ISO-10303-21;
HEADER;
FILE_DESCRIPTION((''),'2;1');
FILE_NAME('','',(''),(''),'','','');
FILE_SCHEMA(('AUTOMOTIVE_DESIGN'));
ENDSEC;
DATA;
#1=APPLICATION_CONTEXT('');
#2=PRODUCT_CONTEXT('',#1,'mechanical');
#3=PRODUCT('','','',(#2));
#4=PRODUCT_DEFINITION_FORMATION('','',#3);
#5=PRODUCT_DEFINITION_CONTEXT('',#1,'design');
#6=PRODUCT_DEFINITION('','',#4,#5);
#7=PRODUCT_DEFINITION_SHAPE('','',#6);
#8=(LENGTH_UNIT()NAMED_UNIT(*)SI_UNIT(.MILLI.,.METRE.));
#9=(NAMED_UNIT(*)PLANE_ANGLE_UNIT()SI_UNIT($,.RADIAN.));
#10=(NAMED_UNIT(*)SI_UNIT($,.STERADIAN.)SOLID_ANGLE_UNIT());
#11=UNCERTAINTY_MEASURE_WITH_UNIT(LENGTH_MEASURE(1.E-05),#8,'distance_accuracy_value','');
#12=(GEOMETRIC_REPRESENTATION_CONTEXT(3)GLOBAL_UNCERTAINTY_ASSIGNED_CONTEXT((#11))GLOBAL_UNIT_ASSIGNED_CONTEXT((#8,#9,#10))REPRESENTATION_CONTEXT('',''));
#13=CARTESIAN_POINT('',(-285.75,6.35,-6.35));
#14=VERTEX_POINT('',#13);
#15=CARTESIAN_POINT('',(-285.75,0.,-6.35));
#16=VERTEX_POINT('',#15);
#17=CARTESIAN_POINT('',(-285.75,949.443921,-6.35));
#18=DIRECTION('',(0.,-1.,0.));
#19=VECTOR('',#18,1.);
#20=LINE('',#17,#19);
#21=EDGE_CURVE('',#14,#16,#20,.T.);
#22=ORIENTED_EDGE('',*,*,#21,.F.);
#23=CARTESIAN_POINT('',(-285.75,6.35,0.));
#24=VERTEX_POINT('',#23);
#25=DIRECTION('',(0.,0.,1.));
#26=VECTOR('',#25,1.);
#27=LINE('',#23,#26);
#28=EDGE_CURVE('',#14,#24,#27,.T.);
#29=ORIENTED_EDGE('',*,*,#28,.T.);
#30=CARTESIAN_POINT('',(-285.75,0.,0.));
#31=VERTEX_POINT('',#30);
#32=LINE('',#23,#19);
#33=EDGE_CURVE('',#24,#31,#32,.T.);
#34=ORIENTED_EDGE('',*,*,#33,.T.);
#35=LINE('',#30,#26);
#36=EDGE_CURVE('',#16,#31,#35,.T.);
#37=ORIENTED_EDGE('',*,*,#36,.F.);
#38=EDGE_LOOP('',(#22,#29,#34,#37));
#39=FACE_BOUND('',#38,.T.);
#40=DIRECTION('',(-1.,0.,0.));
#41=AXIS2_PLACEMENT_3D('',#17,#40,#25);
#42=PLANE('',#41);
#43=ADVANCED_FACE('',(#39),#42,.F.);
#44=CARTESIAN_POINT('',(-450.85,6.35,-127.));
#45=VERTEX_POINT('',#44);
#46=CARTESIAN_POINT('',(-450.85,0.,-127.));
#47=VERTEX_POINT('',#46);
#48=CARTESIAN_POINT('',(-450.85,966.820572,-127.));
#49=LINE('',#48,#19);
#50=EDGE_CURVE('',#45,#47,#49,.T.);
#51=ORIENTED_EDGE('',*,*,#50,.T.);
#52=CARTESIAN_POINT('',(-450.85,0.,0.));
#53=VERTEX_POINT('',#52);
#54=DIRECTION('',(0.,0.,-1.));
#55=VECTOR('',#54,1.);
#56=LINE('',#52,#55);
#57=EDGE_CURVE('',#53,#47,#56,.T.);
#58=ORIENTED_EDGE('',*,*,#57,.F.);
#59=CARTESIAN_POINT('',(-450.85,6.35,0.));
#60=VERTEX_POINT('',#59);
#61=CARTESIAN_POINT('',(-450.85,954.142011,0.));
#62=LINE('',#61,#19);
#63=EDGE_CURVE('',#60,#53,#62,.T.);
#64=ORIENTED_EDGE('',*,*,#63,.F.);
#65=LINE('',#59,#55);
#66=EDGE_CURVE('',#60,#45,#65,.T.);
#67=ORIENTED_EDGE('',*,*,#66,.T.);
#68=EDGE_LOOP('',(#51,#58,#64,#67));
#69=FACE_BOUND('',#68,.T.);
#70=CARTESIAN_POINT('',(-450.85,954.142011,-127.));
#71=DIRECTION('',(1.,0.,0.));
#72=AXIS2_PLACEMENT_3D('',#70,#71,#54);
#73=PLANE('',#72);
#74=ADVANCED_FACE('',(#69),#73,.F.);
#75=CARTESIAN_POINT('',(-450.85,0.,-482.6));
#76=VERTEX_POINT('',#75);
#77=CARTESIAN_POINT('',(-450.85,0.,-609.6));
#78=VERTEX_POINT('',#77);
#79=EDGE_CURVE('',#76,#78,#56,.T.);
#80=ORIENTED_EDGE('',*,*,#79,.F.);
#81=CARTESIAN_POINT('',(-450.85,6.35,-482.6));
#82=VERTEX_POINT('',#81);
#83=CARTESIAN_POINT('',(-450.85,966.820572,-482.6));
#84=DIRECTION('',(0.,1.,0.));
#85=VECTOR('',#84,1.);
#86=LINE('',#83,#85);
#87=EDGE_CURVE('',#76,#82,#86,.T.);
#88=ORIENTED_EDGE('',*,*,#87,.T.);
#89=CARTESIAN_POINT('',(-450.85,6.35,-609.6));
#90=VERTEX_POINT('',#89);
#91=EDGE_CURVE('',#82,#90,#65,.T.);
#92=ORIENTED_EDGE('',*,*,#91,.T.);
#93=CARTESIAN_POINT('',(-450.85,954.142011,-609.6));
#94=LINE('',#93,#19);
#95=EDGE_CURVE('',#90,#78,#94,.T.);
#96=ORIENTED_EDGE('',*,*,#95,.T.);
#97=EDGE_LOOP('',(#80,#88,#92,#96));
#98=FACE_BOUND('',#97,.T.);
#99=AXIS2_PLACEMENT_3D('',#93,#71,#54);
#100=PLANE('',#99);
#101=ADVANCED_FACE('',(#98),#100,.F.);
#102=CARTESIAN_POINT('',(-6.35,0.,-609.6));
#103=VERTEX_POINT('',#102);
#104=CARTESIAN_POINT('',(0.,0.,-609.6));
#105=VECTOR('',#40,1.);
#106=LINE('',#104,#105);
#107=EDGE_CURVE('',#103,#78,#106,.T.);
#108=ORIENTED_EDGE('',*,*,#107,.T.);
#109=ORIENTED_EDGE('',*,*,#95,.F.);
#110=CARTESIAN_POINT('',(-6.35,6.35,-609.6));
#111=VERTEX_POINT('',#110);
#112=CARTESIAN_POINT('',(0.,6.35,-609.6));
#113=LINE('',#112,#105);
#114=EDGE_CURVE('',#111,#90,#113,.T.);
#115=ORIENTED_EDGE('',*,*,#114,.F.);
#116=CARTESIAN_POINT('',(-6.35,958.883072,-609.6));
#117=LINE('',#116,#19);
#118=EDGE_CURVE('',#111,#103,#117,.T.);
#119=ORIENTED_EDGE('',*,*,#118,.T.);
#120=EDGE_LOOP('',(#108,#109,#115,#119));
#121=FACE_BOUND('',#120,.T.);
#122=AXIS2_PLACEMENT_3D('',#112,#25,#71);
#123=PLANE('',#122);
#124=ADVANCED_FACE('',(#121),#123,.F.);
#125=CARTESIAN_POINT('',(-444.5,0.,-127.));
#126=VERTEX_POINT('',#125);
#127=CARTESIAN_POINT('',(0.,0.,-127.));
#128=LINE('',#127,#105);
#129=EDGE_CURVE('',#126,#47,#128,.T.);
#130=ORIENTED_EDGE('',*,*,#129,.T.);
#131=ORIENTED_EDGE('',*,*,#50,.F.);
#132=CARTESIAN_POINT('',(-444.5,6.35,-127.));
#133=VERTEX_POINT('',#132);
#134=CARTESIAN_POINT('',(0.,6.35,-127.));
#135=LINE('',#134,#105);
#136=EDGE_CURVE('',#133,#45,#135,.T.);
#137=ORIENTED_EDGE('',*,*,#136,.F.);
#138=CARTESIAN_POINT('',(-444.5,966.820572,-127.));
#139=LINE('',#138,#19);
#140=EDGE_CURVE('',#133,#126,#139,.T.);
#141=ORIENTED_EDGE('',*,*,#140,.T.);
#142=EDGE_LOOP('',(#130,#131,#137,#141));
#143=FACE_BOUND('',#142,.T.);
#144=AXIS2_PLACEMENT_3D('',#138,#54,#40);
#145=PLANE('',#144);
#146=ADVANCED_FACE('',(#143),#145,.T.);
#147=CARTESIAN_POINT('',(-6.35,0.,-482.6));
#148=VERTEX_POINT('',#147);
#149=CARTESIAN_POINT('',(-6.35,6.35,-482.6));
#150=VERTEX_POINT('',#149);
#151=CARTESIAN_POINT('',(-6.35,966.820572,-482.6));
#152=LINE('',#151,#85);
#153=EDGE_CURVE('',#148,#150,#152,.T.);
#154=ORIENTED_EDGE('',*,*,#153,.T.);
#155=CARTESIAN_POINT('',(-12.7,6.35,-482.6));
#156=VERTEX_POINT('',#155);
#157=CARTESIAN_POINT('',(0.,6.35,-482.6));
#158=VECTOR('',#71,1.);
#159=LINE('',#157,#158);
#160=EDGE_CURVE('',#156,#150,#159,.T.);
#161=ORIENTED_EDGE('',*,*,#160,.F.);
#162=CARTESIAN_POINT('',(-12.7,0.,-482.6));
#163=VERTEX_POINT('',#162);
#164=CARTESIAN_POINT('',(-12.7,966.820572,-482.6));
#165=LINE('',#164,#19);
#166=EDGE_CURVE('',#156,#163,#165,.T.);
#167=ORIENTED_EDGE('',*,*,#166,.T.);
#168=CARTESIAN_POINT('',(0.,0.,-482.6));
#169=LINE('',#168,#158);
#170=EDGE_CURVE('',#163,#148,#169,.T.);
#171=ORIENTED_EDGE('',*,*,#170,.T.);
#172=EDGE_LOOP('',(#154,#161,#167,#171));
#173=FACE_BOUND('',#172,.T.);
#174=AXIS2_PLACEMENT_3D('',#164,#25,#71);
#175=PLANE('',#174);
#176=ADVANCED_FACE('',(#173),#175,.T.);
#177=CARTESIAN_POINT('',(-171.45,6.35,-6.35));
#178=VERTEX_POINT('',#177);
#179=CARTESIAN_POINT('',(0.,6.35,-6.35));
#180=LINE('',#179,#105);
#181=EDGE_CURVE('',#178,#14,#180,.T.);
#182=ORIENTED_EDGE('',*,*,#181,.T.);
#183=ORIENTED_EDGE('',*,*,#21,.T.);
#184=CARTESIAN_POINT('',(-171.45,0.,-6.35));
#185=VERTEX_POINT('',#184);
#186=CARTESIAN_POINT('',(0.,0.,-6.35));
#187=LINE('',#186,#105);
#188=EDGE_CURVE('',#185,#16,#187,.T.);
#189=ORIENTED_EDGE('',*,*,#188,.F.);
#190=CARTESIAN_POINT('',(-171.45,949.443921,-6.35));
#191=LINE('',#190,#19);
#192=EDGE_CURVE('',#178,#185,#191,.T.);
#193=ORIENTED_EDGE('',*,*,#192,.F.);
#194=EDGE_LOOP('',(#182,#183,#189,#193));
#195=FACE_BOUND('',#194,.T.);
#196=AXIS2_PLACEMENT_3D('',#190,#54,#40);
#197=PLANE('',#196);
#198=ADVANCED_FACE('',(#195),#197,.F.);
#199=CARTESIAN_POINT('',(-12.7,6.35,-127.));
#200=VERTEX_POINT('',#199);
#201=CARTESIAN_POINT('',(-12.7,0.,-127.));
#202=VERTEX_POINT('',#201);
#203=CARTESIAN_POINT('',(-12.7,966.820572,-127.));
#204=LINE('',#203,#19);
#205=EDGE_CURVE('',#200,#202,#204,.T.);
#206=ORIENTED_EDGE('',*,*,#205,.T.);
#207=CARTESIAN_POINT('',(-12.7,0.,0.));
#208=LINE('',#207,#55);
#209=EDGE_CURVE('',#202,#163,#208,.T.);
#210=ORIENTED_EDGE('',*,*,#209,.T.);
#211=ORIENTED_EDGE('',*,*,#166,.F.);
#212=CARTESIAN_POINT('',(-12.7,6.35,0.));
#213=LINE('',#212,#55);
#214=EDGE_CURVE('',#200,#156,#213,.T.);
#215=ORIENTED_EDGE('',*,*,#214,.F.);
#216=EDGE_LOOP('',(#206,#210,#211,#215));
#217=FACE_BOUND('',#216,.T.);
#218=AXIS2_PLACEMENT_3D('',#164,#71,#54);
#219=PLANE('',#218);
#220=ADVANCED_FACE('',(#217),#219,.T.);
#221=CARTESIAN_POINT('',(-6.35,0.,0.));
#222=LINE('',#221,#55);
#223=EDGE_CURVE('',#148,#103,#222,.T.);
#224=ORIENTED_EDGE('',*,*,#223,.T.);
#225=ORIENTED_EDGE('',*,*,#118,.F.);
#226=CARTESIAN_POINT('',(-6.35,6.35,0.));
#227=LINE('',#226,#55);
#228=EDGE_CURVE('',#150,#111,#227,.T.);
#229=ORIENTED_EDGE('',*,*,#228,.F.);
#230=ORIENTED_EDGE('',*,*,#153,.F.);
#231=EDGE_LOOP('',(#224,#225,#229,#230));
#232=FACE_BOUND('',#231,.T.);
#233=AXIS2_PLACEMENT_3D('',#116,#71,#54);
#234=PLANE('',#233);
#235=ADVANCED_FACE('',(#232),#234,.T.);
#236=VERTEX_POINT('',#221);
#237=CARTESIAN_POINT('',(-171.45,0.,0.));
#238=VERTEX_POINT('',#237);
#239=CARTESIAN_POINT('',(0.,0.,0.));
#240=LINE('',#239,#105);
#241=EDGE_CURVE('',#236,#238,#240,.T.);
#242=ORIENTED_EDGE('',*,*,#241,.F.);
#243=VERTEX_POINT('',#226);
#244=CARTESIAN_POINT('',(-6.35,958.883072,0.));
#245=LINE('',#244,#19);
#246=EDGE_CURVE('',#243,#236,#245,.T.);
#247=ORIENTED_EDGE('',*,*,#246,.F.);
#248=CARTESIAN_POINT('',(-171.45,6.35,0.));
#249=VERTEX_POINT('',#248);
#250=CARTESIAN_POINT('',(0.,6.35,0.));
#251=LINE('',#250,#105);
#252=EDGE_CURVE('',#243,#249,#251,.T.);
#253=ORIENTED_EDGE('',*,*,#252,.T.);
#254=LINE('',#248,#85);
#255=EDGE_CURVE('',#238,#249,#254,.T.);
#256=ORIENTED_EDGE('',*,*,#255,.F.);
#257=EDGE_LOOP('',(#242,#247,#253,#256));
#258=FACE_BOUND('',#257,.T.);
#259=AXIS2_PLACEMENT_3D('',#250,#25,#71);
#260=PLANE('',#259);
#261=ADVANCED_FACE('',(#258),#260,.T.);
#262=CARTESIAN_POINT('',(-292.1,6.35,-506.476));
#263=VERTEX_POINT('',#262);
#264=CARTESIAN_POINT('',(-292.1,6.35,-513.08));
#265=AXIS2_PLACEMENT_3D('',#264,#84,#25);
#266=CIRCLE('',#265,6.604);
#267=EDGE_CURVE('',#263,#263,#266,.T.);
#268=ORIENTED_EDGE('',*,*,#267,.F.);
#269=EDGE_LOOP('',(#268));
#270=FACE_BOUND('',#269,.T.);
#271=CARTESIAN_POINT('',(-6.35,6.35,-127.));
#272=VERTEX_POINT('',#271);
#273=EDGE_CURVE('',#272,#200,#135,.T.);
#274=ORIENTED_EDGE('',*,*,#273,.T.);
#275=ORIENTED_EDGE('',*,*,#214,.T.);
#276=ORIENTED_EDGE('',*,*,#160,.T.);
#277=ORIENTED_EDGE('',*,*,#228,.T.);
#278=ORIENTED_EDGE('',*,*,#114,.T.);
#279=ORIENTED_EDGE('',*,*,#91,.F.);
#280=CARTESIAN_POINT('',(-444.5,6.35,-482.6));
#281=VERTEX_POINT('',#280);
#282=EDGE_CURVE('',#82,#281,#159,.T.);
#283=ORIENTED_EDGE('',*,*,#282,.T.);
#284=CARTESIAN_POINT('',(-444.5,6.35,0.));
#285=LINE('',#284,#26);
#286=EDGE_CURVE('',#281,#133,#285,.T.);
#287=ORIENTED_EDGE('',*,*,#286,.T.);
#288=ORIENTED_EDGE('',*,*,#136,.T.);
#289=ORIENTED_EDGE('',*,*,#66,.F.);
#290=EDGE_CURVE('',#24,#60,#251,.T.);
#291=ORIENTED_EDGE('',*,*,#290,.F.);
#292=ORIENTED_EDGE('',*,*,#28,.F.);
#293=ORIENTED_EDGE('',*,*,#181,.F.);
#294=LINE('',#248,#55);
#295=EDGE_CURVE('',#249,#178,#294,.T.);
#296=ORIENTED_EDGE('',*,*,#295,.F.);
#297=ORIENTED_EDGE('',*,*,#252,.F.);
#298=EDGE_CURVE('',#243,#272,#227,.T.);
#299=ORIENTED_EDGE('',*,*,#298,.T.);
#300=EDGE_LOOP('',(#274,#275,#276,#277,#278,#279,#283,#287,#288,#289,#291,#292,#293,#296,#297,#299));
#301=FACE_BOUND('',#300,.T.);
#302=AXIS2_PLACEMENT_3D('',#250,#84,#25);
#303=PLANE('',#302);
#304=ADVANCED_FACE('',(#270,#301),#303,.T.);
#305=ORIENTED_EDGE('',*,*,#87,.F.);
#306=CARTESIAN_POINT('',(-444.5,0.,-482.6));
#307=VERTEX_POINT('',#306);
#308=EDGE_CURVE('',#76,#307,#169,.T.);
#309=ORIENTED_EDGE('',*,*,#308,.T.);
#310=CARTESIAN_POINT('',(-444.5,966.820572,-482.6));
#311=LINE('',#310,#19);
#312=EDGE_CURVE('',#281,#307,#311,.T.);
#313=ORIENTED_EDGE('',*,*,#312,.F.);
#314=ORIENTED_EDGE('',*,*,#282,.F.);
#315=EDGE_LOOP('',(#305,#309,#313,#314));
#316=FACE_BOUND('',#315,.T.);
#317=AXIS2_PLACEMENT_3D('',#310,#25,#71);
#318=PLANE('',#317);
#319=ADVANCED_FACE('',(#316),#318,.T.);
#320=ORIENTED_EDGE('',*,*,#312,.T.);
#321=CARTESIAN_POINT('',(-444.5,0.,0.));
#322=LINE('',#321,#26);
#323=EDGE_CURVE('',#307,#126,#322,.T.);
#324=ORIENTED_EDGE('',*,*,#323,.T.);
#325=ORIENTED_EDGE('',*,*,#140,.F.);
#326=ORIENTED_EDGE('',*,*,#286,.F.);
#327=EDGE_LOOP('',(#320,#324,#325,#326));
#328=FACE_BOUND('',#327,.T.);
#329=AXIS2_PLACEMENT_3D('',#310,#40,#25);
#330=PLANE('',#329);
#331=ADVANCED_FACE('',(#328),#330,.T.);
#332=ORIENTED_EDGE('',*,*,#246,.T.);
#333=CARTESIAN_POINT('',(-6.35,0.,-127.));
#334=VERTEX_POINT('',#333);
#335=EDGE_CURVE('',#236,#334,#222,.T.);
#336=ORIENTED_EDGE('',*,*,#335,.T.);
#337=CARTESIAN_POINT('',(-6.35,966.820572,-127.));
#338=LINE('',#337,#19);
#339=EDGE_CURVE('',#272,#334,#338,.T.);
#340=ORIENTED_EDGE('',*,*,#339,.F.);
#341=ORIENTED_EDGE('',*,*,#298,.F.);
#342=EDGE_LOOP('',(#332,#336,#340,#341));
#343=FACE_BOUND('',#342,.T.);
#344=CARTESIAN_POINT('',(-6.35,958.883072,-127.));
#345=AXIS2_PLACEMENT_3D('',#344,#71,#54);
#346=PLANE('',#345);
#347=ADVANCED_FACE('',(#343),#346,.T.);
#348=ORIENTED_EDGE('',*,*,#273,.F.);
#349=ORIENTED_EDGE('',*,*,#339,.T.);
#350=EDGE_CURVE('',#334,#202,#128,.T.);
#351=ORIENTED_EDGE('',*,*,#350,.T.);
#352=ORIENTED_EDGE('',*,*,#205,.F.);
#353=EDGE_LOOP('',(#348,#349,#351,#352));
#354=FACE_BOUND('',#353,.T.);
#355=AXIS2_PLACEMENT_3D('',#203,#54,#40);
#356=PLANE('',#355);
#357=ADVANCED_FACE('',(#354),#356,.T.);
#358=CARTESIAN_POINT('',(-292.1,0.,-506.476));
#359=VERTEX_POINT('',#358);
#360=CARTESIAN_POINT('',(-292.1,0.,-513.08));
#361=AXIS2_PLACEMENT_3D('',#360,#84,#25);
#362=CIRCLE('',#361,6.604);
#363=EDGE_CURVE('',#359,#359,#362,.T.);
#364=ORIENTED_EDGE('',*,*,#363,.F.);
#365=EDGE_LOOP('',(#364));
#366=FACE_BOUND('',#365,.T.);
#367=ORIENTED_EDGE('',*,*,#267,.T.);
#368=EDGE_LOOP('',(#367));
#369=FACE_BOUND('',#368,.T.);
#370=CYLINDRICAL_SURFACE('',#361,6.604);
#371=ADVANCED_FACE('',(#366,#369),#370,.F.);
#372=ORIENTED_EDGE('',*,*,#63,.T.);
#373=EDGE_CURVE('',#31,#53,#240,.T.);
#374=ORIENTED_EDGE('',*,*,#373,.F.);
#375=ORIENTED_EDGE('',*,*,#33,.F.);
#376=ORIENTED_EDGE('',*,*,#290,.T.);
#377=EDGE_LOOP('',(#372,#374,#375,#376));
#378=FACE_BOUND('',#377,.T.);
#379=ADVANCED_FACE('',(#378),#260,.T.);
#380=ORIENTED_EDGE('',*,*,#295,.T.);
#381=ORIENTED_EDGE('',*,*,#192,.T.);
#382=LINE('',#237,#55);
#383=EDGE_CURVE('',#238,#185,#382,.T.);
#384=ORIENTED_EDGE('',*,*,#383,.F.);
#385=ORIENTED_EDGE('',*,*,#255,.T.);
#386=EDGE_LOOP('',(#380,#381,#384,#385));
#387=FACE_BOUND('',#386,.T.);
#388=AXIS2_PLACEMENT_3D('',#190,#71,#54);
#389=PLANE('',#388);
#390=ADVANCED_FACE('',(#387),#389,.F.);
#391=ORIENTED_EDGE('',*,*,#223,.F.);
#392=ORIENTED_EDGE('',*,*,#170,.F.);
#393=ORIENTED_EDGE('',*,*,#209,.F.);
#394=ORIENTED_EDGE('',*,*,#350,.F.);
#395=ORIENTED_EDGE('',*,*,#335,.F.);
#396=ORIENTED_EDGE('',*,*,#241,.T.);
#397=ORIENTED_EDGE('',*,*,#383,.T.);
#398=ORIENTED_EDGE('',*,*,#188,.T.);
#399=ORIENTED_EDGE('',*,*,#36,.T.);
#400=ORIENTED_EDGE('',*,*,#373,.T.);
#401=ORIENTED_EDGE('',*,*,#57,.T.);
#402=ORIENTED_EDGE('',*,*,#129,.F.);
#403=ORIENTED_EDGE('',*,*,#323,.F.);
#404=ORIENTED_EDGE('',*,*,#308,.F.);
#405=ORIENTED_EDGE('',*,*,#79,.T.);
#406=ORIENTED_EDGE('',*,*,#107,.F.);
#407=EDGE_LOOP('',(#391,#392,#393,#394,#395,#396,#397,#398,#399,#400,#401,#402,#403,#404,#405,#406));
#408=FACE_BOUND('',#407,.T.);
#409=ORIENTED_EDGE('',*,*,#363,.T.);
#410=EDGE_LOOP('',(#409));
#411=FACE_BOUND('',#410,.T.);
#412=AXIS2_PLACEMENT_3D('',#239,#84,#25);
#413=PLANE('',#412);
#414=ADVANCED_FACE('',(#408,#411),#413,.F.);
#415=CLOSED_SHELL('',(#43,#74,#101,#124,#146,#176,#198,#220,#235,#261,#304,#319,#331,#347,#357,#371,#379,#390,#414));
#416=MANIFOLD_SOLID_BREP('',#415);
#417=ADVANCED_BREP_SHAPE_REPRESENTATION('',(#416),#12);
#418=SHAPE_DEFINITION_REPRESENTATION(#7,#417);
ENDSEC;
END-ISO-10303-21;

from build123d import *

# Parameters (mm, degrees)
SKETCH1_W                = 457.2
SKETCH1_H                = 609.6
BOSS_EXTRUDE1_DEPTH      = 6.35
CUT_EXTRUDE4_DEPTH       = 763.026457874
CUT_EXTRUDE4_DEPTH_BACK  = 763.026457874
SKETCH3_W                = 12.7
SKETCH3_H                = 355.6
CUT_EXTRUDE5_DEPTH       = 763.026457874
CUT_EXTRUDE5_DEPTH_BACK  = 763.026457874
CUT_EXTRUDE7_DEPTH       = 763.026457874
CUT_EXTRUDE7_DEPTH_BACK  = 763.026457874
SKETCH7_W                = 6.35
SKETCH7_H                = 127
CUT_EXTRUDE8_DEPTH       = 763.026457874
CUT_EXTRUDE8_DEPTH_BACK  = 763.026457874
CUT_EXTRUDE10_START      = -6.35
CUT_EXTRUDE10_OUTLINE_W  = 6.35
CUT_EXTRUDE10_OUTLINE_H  = 127
CUT_EXTRUDE10_DEPTH      = 6.35
CUT_EXTRUDE11_DEPTH      = 763.026457874
CUT_EXTRUDE11_DEPTH_BACK = 763.026457874
CUT_EXTRUDE12_DEPTH      = 759.233608461
CUT_EXTRUDE12_DEPTH_BACK = 759.233608461
SKETCH2_R                = 6.604
CUT_EXTRUDE13_DEPTH      = 759.233608461


# Read off the part's stored shape, not the designer's step: Cut-Extrude10
with BuildPart() as part:
    # Sketch1 → Boss-Extrude1 (new body)
    with BuildSketch(Plane(origin=(0, 0, 0), x_dir=(1, 0, 0), z_dir=(0, 1, 0))):
        with Locations((-228.6, 304.8)):
            Rectangle(SKETCH1_W, SKETCH1_H)
    extrude(amount=BOSS_EXTRUDE1_DEPTH)

    # Sketch3 → Cut-Extrude4 (cut, two sides: drawn at the far end of the back side and taken through both)
    with BuildSketch(Plane(origin=(0, 6.35, 0), x_dir=(1, 0, 0), z_dir=(0, 1, 0)).offset(-CUT_EXTRUDE4_DEPTH_BACK)):
        with Locations((-450.85, 304.8)):
            Rectangle(SKETCH3_W, SKETCH3_H)
    extrude(amount=CUT_EXTRUDE4_DEPTH + CUT_EXTRUDE4_DEPTH_BACK, mode=Mode.SUBTRACT)

    # Sketch5 → Cut-Extrude5 (cut, two sides: drawn at the far end of the back side and taken through both)
    with BuildSketch(Plane(origin=(0, 6.35, 0), x_dir=(1, 0, 0), z_dir=(0, 1, 0)).offset(-CUT_EXTRUDE5_DEPTH_BACK)):
        Polygon((1339.563236556, 482.6), (0, 482.6), (-12.7, 482.6), (-12.7, 127), (0, 127), (1339.563236556, 127), (4018.689709667, 127), (4018.689709667, 482.6), align=None)
    extrude(amount=CUT_EXTRUDE5_DEPTH + CUT_EXTRUDE5_DEPTH_BACK, mode=Mode.SUBTRACT)

    # Sketch7 → Cut-Extrude7 (cut, two sides: drawn at the far end of the back side and taken through both)
    with BuildSketch(Plane(origin=(0, 6.35, 0), x_dir=(1, 0, 0), z_dir=(0, 1, 0)).offset(-CUT_EXTRUDE7_DEPTH_BACK)):
        with Locations((-3.175, 63.5)):
            Rectangle(SKETCH7_W, SKETCH7_H)
    extrude(amount=CUT_EXTRUDE7_DEPTH + CUT_EXTRUDE7_DEPTH_BACK, mode=Mode.SUBTRACT)

    # Sketch8 → Cut-Extrude8 (cut, two sides: drawn at the far end of the back side and taken through both)
    with BuildSketch(Plane(origin=(0, 6.35, 0), x_dir=(1, 0, 0), z_dir=(0, 1, 0)).offset(-CUT_EXTRUDE8_DEPTH_BACK)):
        Polygon((-6.35, 2136.014036469), (-6.35, 609.6), (-6.35, 482.6), (-6.35, -1043.814036469), (3046.478072938, -1043.814036469), (3046.478072938, 2136.014036469), align=None)
    extrude(amount=CUT_EXTRUDE8_DEPTH + CUT_EXTRUDE8_DEPTH_BACK, mode=Mode.SUBTRACT)

    # Cut-Extrude10 outline → Cut-Extrude10 (cut)
    with BuildSketch(Plane(origin=(0, 6.35, 0), x_dir=(1, 0, 0), z_dir=(0, 1, 0)).offset(CUT_EXTRUDE10_START)):
        with Locations((-454.025, 546.1)):
            Rectangle(CUT_EXTRUDE10_OUTLINE_W, CUT_EXTRUDE10_OUTLINE_H)
    extrude(amount=CUT_EXTRUDE10_DEPTH, mode=Mode.SUBTRACT)

    # Sketch11 → Cut-Extrude11 (cut, two sides: drawn at the far end of the back side and taken through both)
    with BuildSketch(Plane(origin=(0, 6.35, 0), x_dir=(1, 0, 0), z_dir=(0, 1, 0)).offset(-CUT_EXTRUDE11_DEPTH_BACK)):
        Polygon((-450.85, 1645.896828812), (-450.85, 127), (-450.85, 0), (-450.85, -1518.896828812), (-3488.643657625, -1518.896828812), (-3488.643657625, 1645.896828812), align=None)
    extrude(amount=CUT_EXTRUDE11_DEPTH + CUT_EXTRUDE11_DEPTH_BACK, mode=Mode.SUBTRACT)

    # Sketch6 → Cut-Extrude12 (cut, two sides: drawn at the far end of the back side and taken through both)
    with BuildSketch(Plane(origin=(0, 6.35, 0), x_dir=(1, 0, 0), z_dir=(0, 1, 0)).offset(-CUT_EXTRUDE12_DEPTH_BACK)):
        Polygon((-171.45, -1351.158484296), (-171.45, 0), (-171.45, 6.35), (-285.75, 6.35), (-285.75, 0), (-285.75, -1351.158484296), (-285.75, -4053.475452889), (-171.45, -4053.475452889), align=None)
    extrude(amount=CUT_EXTRUDE12_DEPTH + CUT_EXTRUDE12_DEPTH_BACK, mode=Mode.SUBTRACT)

    # Sketch2 → Cut-Extrude13 (cut, through all)
    with BuildSketch(Plane(origin=(0, 6.35, 0), x_dir=(1, 0, 0), z_dir=(0, 1, 0))):
        with Locations(Location((-292.1, 513.08, 0), (0, 0, 270))):
            Circle(SKETCH2_R)
    extrude(amount=-CUT_EXTRUDE13_DEPTH, mode=Mode.SUBTRACT)


solid = part.part
